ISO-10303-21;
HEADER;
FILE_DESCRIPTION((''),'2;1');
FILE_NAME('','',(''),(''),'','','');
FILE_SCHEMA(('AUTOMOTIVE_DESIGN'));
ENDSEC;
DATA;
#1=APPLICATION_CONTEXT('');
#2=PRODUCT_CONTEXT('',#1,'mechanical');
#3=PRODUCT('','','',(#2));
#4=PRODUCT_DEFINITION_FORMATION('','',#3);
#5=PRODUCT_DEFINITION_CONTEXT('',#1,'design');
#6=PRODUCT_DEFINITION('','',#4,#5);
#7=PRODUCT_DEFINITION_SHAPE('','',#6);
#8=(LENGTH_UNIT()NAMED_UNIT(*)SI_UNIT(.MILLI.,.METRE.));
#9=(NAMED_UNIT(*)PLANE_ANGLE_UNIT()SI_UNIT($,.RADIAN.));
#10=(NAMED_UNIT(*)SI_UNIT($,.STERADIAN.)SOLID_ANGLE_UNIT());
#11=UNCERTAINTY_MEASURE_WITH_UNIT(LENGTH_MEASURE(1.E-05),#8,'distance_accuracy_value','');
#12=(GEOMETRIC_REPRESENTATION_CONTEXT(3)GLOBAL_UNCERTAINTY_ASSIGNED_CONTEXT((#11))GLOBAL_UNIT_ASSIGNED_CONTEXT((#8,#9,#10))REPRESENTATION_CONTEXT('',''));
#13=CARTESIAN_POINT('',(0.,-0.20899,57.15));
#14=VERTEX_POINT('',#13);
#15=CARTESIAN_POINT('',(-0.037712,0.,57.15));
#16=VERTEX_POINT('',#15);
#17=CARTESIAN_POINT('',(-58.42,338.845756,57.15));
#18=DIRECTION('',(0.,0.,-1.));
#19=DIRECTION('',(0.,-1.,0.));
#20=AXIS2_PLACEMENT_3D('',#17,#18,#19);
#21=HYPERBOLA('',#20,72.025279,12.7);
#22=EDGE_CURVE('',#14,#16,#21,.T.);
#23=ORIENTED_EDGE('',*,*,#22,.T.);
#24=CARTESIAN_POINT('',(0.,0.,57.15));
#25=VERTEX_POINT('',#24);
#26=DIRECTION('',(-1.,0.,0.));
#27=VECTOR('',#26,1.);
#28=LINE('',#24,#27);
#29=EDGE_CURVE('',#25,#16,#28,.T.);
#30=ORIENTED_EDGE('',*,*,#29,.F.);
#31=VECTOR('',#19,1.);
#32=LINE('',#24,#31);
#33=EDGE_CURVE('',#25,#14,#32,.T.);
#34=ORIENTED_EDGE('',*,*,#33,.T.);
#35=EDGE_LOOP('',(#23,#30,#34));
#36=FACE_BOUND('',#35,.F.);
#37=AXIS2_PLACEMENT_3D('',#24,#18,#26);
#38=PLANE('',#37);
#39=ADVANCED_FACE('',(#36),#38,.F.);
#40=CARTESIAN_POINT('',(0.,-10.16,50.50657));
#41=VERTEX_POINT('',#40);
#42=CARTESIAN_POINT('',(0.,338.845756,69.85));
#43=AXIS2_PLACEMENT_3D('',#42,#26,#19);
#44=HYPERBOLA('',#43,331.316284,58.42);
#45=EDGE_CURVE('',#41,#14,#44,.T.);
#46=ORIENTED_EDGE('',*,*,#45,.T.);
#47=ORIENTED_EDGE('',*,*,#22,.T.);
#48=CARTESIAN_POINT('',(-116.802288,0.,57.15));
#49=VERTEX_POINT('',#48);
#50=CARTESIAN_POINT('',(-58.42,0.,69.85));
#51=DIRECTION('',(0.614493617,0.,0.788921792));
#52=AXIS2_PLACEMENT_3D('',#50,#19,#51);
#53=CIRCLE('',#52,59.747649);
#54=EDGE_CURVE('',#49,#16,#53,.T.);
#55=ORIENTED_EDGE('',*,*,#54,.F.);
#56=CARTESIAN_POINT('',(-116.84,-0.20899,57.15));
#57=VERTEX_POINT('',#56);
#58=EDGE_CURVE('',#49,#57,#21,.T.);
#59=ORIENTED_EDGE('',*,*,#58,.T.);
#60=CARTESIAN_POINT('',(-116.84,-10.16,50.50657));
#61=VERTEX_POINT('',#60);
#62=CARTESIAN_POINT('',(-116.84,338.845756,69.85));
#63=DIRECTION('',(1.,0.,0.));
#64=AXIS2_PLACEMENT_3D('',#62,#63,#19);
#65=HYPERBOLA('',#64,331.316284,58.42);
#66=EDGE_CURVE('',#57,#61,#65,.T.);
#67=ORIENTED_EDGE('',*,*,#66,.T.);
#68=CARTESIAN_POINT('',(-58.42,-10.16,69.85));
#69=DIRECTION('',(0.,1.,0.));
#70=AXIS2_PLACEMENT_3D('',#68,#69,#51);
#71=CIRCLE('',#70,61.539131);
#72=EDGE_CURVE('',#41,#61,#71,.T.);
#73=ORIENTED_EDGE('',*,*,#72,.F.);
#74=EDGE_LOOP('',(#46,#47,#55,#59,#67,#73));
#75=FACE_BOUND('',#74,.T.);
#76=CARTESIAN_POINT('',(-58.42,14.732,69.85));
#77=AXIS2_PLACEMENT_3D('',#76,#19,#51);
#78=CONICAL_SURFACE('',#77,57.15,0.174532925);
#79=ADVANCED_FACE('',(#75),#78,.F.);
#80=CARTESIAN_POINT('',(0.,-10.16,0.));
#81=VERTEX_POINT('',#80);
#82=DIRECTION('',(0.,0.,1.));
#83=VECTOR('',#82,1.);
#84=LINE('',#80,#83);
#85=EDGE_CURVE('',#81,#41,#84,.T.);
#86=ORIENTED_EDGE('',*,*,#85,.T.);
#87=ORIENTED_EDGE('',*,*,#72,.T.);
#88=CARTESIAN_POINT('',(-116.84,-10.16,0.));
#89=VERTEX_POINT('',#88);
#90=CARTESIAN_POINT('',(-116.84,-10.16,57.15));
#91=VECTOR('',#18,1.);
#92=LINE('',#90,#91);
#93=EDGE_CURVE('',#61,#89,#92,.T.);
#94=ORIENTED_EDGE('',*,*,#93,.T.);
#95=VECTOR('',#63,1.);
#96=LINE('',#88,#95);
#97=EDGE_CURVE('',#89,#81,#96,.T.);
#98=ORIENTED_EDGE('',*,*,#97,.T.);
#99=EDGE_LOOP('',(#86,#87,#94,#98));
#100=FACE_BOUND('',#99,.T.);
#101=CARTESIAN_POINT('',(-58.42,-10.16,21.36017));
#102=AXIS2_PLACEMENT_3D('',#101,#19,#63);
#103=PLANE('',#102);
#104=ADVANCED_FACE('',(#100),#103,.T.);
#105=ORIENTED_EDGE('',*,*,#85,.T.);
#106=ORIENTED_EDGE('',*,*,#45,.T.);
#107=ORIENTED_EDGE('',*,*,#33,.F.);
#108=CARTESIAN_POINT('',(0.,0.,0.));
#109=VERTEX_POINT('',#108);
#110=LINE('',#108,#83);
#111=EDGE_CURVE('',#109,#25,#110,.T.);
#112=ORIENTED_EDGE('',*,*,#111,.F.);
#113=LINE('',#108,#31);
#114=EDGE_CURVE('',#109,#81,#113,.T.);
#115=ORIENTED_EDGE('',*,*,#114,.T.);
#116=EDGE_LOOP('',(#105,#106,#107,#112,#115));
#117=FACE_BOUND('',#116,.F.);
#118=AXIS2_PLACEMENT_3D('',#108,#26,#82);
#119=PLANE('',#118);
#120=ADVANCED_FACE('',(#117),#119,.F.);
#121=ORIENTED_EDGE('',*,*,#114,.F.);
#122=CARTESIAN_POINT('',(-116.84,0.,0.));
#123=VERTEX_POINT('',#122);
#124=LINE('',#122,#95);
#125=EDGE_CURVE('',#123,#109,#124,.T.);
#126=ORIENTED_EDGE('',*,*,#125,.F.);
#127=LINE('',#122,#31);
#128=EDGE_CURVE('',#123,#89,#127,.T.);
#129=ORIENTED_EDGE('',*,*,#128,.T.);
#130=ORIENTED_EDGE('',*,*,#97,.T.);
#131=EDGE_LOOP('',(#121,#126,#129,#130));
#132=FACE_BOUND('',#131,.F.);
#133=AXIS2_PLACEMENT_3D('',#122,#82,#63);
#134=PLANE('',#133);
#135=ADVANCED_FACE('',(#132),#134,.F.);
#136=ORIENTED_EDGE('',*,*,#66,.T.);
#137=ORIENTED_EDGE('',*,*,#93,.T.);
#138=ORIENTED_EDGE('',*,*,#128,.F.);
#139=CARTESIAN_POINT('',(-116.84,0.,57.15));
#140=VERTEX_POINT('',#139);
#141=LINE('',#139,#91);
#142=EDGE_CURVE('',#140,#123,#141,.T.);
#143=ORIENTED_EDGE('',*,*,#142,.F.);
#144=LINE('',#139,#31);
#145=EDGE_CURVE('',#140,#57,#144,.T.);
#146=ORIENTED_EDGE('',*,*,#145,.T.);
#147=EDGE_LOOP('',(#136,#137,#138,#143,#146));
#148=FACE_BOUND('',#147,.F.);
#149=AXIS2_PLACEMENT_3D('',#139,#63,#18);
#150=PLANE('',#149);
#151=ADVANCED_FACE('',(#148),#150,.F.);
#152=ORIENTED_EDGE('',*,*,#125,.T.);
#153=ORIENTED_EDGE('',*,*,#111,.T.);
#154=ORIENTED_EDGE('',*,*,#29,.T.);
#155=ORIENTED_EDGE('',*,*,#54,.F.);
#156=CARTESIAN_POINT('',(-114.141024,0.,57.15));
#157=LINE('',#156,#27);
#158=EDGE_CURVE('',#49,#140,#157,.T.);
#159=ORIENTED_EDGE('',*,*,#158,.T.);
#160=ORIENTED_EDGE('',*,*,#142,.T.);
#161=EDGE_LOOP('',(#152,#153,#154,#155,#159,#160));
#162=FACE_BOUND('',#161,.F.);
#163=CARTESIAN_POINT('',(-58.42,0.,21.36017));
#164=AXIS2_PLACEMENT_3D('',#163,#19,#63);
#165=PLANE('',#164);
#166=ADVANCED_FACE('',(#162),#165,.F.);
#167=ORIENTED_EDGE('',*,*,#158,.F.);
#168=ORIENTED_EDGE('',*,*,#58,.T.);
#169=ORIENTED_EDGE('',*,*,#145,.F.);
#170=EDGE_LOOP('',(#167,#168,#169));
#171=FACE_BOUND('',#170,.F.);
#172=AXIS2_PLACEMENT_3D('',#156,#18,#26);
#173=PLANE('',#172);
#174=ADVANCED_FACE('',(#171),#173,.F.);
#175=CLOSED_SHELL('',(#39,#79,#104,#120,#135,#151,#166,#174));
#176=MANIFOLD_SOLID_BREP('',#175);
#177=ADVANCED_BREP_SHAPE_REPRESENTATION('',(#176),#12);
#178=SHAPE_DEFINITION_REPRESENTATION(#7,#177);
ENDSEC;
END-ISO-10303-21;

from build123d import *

# Parameters (mm, degrees)
F1_DEPTH    = 10.16
F2_T2_ANGLE = 284.1697303729


# Not quite as in the source:
# - a fillet or chamfer that OpenCascade refuses, or shapes differently, is made with other operations: its cross-section is extruded or revolved along the edge and cut away or added


with BuildPart() as f1:
    # F0 (on Front) → F1 (new body)
    with BuildSketch(Plane.XZ):
        with BuildLine():
            Line((-116.84, 0), (0, 0))
            Line((0, 0), (0, 57.15))
            Line((0, 57.15), (-2.6989761401, 57.15))
            ThreePointArc((-2.6989761401, 57.15), (-58.42, 12.7), (-114.1410238599, 57.15))
            Line((-114.1410238599, 57.15), (-116.84, 57.15))
            Line((-116.84, 57.15), (-116.84, 0))
        make_face()
    extrude(amount=F1_DEPTH)

    # F2: chamfer of 24.892 x 4.3891312038 on 1 edges, made by hand

    # F2_s1 → F2_t2 (revolve, cut)
    with BuildSketch(Plane(origin=(-70.2228677722, 0, 54.6968082658), x_dir=(0, 1, 0), z_dir=(-0.7889217924, 0, 0.6144936171))):
        Polygon((14.732, -76.3574700932), (-10.16, -80.746601297), (-10.16, -76.3574700932), align=None)
    revolve(axis=Axis((-58.42, -10.16, 69.85), (0, 1, 0)), revolution_arc=F2_T2_ANGLE, mode=Mode.SUBTRACT)


solid = f1.part
